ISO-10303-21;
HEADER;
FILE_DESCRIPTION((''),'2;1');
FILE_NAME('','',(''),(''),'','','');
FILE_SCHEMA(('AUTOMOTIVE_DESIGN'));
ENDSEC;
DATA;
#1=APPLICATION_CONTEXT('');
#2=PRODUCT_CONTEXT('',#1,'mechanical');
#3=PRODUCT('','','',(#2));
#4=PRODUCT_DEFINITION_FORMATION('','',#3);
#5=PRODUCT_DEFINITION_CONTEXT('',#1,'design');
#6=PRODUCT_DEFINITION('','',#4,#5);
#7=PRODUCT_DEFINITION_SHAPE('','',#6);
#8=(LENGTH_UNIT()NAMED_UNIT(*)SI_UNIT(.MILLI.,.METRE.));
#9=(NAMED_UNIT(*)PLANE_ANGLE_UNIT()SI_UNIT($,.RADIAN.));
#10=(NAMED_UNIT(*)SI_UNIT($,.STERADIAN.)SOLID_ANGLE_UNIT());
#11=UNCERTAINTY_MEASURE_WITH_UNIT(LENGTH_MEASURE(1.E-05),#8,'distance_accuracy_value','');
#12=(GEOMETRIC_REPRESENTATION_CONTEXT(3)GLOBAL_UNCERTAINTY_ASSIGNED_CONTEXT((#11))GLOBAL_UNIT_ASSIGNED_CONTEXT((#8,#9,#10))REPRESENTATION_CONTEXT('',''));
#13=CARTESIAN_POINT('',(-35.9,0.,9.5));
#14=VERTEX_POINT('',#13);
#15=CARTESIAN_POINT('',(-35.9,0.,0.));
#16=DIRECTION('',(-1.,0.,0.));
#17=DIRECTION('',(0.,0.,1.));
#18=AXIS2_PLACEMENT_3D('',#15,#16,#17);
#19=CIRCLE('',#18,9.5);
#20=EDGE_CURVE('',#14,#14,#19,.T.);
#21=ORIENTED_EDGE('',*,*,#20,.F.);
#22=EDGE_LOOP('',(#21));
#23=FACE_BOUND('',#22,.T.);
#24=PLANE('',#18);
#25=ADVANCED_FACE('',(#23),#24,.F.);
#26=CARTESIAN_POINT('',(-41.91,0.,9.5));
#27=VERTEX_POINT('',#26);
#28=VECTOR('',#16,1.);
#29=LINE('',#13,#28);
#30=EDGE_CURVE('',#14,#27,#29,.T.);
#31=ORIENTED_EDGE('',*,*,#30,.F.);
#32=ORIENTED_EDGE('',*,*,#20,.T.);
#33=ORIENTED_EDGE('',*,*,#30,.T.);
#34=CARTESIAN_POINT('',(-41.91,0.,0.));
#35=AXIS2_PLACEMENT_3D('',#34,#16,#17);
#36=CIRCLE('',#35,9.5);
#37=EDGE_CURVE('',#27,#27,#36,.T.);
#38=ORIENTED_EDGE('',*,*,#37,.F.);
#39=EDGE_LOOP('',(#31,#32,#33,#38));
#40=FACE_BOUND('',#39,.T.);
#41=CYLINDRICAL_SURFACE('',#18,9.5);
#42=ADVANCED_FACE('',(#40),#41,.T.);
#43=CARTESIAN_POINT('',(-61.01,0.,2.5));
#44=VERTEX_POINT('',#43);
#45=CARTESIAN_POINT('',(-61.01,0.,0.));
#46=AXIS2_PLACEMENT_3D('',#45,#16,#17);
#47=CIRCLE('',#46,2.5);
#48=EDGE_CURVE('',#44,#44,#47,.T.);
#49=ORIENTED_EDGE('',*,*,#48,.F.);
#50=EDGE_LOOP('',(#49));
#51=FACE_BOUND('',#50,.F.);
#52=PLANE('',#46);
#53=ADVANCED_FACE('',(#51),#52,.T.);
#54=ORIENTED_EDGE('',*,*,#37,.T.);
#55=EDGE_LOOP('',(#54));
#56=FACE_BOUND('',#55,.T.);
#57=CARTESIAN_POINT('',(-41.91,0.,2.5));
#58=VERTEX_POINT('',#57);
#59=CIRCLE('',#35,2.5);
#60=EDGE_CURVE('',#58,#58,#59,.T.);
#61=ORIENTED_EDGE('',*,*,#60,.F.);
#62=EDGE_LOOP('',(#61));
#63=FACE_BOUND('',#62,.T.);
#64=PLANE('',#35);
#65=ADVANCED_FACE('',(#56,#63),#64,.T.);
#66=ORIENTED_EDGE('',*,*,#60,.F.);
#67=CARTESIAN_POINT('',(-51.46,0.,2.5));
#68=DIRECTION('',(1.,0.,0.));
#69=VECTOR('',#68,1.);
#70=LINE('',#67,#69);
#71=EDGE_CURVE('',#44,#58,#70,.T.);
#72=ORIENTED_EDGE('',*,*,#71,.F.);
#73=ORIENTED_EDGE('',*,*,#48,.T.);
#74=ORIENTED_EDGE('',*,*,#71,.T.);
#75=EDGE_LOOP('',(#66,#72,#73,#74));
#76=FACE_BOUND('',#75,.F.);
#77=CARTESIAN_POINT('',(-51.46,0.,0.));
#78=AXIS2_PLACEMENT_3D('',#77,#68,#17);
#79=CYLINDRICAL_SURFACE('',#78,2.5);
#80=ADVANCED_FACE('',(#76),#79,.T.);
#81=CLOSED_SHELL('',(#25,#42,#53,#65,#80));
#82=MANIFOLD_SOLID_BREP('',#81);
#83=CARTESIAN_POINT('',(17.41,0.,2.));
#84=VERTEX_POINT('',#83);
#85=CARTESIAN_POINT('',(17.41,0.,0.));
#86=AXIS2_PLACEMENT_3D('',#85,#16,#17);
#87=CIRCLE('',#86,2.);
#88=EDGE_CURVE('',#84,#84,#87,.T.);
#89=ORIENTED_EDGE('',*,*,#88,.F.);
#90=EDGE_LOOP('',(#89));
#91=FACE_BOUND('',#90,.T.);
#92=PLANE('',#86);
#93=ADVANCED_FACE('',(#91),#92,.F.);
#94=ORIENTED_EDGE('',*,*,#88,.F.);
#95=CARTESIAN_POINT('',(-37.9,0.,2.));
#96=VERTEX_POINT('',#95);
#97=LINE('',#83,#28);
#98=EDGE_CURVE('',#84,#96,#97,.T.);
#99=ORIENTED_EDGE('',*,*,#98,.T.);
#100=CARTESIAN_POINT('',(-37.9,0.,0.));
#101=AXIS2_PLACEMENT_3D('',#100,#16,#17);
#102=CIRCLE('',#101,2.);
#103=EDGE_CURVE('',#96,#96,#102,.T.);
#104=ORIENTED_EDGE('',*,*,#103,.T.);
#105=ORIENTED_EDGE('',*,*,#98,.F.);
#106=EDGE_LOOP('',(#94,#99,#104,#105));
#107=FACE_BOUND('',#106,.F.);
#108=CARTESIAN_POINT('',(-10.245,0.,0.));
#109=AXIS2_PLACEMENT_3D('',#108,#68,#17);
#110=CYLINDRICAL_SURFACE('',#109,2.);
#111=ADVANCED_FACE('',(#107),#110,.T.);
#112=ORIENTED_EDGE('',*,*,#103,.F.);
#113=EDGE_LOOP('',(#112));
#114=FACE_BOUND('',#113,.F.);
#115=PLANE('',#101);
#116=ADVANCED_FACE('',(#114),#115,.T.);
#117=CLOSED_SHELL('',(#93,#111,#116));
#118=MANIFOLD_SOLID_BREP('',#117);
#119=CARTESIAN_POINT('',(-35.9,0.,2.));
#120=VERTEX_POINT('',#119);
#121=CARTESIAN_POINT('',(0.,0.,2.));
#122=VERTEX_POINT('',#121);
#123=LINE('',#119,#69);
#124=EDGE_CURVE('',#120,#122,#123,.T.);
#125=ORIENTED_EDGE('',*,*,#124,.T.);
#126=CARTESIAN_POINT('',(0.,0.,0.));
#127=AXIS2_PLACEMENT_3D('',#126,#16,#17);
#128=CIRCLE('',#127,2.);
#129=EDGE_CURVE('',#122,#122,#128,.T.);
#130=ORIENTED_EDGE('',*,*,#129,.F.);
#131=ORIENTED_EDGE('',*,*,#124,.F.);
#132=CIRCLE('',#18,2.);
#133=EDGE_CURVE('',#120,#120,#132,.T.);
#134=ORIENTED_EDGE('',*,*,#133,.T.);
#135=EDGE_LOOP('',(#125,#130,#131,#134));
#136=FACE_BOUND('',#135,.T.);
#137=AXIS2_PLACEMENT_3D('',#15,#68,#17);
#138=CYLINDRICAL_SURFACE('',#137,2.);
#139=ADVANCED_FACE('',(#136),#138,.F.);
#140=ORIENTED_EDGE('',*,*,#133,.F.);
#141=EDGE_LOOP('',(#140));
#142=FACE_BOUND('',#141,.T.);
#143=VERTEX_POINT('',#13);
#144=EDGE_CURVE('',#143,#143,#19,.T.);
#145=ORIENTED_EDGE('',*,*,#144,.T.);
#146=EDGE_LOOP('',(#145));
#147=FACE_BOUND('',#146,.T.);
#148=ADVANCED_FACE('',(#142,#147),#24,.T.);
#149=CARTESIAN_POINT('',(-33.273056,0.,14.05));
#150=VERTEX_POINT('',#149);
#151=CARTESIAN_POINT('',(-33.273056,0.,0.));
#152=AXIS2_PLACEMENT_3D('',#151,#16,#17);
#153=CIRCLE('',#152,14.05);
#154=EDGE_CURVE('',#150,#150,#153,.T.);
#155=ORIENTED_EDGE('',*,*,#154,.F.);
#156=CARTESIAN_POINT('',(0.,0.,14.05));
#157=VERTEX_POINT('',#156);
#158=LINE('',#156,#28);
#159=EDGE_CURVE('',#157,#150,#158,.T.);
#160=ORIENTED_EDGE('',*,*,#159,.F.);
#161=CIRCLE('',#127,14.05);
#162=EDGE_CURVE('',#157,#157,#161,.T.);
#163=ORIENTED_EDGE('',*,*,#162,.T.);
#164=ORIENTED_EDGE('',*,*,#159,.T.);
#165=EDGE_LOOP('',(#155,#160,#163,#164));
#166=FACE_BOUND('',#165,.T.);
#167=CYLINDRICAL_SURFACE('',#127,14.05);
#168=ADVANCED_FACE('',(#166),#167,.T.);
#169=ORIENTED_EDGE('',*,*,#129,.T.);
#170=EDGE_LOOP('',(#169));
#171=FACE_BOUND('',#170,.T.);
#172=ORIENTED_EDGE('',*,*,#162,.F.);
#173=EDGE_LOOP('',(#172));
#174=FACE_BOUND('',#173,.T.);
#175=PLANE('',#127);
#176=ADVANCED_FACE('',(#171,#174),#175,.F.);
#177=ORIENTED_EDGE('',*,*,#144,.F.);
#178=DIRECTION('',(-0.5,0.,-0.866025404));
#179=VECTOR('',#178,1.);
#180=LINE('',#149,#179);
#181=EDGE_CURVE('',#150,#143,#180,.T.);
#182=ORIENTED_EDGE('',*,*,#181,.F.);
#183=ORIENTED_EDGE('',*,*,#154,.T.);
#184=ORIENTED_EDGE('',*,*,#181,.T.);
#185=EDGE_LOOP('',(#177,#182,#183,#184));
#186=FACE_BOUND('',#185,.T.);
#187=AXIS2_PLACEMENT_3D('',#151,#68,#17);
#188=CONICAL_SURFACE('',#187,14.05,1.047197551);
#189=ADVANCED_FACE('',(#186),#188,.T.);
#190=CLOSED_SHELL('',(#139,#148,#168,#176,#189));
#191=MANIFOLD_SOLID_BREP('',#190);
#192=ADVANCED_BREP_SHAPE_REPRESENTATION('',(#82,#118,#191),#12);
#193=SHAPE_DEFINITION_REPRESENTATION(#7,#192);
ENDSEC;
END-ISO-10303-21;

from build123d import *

# Parameters (mm, degrees)
F1_W = 17.41
F1_H = 2
F2_W = 55.31
F2_H = 2
F3_W = 19.1
F3_H = 2.5


with BuildPart() as f4:
    # F1 (on Front) → F4 (revolve)
    with BuildSketch(Plane.XZ):
        with Locations((8.705, 1)):
            Rectangle(F1_W, F1_H)
    revolve(axis=Axis((-21.8, 0, 0), (-1, 0, 0)))

    # F2 (on Front) → F5 (revolve)
    with BuildSketch(Plane.XZ):
        with Locations((-10.245, 1)):
            Rectangle(F2_W, F2_H)
    revolve(axis=Axis((-21.8, 0, 0), (-1, 0, 0)))


with BuildPart() as f4b:
    # F1 (on Front) → F4, piece 2 (revolve)
    with BuildSketch(Plane.XZ):
        Polygon((0, 14.05), (-33.2730562752, 14.05), (-35.9, 9.5), (-35.9, 2), (0, 2), align=None)
    revolve(axis=Axis((-21.8, 0, 0), (-1, 0, 0)))


with BuildPart() as f6:
    # F3 (on Front) → F6 (revolve)
    with BuildSketch(Plane.XZ):
        with Locations((-51.46, 1.25)):
            Rectangle(F3_W, F3_H)
        Polygon((-35.9, 9.5), (-41.91, 9.5), (-41.91, 2.5), (-41.91, 0), (-35.9, 0), align=None)
    revolve(axis=Axis((-21.8, 0, 0), (-1, 0, 0)))


solid = Compound([f4.part, f4b.part, f6.part])
